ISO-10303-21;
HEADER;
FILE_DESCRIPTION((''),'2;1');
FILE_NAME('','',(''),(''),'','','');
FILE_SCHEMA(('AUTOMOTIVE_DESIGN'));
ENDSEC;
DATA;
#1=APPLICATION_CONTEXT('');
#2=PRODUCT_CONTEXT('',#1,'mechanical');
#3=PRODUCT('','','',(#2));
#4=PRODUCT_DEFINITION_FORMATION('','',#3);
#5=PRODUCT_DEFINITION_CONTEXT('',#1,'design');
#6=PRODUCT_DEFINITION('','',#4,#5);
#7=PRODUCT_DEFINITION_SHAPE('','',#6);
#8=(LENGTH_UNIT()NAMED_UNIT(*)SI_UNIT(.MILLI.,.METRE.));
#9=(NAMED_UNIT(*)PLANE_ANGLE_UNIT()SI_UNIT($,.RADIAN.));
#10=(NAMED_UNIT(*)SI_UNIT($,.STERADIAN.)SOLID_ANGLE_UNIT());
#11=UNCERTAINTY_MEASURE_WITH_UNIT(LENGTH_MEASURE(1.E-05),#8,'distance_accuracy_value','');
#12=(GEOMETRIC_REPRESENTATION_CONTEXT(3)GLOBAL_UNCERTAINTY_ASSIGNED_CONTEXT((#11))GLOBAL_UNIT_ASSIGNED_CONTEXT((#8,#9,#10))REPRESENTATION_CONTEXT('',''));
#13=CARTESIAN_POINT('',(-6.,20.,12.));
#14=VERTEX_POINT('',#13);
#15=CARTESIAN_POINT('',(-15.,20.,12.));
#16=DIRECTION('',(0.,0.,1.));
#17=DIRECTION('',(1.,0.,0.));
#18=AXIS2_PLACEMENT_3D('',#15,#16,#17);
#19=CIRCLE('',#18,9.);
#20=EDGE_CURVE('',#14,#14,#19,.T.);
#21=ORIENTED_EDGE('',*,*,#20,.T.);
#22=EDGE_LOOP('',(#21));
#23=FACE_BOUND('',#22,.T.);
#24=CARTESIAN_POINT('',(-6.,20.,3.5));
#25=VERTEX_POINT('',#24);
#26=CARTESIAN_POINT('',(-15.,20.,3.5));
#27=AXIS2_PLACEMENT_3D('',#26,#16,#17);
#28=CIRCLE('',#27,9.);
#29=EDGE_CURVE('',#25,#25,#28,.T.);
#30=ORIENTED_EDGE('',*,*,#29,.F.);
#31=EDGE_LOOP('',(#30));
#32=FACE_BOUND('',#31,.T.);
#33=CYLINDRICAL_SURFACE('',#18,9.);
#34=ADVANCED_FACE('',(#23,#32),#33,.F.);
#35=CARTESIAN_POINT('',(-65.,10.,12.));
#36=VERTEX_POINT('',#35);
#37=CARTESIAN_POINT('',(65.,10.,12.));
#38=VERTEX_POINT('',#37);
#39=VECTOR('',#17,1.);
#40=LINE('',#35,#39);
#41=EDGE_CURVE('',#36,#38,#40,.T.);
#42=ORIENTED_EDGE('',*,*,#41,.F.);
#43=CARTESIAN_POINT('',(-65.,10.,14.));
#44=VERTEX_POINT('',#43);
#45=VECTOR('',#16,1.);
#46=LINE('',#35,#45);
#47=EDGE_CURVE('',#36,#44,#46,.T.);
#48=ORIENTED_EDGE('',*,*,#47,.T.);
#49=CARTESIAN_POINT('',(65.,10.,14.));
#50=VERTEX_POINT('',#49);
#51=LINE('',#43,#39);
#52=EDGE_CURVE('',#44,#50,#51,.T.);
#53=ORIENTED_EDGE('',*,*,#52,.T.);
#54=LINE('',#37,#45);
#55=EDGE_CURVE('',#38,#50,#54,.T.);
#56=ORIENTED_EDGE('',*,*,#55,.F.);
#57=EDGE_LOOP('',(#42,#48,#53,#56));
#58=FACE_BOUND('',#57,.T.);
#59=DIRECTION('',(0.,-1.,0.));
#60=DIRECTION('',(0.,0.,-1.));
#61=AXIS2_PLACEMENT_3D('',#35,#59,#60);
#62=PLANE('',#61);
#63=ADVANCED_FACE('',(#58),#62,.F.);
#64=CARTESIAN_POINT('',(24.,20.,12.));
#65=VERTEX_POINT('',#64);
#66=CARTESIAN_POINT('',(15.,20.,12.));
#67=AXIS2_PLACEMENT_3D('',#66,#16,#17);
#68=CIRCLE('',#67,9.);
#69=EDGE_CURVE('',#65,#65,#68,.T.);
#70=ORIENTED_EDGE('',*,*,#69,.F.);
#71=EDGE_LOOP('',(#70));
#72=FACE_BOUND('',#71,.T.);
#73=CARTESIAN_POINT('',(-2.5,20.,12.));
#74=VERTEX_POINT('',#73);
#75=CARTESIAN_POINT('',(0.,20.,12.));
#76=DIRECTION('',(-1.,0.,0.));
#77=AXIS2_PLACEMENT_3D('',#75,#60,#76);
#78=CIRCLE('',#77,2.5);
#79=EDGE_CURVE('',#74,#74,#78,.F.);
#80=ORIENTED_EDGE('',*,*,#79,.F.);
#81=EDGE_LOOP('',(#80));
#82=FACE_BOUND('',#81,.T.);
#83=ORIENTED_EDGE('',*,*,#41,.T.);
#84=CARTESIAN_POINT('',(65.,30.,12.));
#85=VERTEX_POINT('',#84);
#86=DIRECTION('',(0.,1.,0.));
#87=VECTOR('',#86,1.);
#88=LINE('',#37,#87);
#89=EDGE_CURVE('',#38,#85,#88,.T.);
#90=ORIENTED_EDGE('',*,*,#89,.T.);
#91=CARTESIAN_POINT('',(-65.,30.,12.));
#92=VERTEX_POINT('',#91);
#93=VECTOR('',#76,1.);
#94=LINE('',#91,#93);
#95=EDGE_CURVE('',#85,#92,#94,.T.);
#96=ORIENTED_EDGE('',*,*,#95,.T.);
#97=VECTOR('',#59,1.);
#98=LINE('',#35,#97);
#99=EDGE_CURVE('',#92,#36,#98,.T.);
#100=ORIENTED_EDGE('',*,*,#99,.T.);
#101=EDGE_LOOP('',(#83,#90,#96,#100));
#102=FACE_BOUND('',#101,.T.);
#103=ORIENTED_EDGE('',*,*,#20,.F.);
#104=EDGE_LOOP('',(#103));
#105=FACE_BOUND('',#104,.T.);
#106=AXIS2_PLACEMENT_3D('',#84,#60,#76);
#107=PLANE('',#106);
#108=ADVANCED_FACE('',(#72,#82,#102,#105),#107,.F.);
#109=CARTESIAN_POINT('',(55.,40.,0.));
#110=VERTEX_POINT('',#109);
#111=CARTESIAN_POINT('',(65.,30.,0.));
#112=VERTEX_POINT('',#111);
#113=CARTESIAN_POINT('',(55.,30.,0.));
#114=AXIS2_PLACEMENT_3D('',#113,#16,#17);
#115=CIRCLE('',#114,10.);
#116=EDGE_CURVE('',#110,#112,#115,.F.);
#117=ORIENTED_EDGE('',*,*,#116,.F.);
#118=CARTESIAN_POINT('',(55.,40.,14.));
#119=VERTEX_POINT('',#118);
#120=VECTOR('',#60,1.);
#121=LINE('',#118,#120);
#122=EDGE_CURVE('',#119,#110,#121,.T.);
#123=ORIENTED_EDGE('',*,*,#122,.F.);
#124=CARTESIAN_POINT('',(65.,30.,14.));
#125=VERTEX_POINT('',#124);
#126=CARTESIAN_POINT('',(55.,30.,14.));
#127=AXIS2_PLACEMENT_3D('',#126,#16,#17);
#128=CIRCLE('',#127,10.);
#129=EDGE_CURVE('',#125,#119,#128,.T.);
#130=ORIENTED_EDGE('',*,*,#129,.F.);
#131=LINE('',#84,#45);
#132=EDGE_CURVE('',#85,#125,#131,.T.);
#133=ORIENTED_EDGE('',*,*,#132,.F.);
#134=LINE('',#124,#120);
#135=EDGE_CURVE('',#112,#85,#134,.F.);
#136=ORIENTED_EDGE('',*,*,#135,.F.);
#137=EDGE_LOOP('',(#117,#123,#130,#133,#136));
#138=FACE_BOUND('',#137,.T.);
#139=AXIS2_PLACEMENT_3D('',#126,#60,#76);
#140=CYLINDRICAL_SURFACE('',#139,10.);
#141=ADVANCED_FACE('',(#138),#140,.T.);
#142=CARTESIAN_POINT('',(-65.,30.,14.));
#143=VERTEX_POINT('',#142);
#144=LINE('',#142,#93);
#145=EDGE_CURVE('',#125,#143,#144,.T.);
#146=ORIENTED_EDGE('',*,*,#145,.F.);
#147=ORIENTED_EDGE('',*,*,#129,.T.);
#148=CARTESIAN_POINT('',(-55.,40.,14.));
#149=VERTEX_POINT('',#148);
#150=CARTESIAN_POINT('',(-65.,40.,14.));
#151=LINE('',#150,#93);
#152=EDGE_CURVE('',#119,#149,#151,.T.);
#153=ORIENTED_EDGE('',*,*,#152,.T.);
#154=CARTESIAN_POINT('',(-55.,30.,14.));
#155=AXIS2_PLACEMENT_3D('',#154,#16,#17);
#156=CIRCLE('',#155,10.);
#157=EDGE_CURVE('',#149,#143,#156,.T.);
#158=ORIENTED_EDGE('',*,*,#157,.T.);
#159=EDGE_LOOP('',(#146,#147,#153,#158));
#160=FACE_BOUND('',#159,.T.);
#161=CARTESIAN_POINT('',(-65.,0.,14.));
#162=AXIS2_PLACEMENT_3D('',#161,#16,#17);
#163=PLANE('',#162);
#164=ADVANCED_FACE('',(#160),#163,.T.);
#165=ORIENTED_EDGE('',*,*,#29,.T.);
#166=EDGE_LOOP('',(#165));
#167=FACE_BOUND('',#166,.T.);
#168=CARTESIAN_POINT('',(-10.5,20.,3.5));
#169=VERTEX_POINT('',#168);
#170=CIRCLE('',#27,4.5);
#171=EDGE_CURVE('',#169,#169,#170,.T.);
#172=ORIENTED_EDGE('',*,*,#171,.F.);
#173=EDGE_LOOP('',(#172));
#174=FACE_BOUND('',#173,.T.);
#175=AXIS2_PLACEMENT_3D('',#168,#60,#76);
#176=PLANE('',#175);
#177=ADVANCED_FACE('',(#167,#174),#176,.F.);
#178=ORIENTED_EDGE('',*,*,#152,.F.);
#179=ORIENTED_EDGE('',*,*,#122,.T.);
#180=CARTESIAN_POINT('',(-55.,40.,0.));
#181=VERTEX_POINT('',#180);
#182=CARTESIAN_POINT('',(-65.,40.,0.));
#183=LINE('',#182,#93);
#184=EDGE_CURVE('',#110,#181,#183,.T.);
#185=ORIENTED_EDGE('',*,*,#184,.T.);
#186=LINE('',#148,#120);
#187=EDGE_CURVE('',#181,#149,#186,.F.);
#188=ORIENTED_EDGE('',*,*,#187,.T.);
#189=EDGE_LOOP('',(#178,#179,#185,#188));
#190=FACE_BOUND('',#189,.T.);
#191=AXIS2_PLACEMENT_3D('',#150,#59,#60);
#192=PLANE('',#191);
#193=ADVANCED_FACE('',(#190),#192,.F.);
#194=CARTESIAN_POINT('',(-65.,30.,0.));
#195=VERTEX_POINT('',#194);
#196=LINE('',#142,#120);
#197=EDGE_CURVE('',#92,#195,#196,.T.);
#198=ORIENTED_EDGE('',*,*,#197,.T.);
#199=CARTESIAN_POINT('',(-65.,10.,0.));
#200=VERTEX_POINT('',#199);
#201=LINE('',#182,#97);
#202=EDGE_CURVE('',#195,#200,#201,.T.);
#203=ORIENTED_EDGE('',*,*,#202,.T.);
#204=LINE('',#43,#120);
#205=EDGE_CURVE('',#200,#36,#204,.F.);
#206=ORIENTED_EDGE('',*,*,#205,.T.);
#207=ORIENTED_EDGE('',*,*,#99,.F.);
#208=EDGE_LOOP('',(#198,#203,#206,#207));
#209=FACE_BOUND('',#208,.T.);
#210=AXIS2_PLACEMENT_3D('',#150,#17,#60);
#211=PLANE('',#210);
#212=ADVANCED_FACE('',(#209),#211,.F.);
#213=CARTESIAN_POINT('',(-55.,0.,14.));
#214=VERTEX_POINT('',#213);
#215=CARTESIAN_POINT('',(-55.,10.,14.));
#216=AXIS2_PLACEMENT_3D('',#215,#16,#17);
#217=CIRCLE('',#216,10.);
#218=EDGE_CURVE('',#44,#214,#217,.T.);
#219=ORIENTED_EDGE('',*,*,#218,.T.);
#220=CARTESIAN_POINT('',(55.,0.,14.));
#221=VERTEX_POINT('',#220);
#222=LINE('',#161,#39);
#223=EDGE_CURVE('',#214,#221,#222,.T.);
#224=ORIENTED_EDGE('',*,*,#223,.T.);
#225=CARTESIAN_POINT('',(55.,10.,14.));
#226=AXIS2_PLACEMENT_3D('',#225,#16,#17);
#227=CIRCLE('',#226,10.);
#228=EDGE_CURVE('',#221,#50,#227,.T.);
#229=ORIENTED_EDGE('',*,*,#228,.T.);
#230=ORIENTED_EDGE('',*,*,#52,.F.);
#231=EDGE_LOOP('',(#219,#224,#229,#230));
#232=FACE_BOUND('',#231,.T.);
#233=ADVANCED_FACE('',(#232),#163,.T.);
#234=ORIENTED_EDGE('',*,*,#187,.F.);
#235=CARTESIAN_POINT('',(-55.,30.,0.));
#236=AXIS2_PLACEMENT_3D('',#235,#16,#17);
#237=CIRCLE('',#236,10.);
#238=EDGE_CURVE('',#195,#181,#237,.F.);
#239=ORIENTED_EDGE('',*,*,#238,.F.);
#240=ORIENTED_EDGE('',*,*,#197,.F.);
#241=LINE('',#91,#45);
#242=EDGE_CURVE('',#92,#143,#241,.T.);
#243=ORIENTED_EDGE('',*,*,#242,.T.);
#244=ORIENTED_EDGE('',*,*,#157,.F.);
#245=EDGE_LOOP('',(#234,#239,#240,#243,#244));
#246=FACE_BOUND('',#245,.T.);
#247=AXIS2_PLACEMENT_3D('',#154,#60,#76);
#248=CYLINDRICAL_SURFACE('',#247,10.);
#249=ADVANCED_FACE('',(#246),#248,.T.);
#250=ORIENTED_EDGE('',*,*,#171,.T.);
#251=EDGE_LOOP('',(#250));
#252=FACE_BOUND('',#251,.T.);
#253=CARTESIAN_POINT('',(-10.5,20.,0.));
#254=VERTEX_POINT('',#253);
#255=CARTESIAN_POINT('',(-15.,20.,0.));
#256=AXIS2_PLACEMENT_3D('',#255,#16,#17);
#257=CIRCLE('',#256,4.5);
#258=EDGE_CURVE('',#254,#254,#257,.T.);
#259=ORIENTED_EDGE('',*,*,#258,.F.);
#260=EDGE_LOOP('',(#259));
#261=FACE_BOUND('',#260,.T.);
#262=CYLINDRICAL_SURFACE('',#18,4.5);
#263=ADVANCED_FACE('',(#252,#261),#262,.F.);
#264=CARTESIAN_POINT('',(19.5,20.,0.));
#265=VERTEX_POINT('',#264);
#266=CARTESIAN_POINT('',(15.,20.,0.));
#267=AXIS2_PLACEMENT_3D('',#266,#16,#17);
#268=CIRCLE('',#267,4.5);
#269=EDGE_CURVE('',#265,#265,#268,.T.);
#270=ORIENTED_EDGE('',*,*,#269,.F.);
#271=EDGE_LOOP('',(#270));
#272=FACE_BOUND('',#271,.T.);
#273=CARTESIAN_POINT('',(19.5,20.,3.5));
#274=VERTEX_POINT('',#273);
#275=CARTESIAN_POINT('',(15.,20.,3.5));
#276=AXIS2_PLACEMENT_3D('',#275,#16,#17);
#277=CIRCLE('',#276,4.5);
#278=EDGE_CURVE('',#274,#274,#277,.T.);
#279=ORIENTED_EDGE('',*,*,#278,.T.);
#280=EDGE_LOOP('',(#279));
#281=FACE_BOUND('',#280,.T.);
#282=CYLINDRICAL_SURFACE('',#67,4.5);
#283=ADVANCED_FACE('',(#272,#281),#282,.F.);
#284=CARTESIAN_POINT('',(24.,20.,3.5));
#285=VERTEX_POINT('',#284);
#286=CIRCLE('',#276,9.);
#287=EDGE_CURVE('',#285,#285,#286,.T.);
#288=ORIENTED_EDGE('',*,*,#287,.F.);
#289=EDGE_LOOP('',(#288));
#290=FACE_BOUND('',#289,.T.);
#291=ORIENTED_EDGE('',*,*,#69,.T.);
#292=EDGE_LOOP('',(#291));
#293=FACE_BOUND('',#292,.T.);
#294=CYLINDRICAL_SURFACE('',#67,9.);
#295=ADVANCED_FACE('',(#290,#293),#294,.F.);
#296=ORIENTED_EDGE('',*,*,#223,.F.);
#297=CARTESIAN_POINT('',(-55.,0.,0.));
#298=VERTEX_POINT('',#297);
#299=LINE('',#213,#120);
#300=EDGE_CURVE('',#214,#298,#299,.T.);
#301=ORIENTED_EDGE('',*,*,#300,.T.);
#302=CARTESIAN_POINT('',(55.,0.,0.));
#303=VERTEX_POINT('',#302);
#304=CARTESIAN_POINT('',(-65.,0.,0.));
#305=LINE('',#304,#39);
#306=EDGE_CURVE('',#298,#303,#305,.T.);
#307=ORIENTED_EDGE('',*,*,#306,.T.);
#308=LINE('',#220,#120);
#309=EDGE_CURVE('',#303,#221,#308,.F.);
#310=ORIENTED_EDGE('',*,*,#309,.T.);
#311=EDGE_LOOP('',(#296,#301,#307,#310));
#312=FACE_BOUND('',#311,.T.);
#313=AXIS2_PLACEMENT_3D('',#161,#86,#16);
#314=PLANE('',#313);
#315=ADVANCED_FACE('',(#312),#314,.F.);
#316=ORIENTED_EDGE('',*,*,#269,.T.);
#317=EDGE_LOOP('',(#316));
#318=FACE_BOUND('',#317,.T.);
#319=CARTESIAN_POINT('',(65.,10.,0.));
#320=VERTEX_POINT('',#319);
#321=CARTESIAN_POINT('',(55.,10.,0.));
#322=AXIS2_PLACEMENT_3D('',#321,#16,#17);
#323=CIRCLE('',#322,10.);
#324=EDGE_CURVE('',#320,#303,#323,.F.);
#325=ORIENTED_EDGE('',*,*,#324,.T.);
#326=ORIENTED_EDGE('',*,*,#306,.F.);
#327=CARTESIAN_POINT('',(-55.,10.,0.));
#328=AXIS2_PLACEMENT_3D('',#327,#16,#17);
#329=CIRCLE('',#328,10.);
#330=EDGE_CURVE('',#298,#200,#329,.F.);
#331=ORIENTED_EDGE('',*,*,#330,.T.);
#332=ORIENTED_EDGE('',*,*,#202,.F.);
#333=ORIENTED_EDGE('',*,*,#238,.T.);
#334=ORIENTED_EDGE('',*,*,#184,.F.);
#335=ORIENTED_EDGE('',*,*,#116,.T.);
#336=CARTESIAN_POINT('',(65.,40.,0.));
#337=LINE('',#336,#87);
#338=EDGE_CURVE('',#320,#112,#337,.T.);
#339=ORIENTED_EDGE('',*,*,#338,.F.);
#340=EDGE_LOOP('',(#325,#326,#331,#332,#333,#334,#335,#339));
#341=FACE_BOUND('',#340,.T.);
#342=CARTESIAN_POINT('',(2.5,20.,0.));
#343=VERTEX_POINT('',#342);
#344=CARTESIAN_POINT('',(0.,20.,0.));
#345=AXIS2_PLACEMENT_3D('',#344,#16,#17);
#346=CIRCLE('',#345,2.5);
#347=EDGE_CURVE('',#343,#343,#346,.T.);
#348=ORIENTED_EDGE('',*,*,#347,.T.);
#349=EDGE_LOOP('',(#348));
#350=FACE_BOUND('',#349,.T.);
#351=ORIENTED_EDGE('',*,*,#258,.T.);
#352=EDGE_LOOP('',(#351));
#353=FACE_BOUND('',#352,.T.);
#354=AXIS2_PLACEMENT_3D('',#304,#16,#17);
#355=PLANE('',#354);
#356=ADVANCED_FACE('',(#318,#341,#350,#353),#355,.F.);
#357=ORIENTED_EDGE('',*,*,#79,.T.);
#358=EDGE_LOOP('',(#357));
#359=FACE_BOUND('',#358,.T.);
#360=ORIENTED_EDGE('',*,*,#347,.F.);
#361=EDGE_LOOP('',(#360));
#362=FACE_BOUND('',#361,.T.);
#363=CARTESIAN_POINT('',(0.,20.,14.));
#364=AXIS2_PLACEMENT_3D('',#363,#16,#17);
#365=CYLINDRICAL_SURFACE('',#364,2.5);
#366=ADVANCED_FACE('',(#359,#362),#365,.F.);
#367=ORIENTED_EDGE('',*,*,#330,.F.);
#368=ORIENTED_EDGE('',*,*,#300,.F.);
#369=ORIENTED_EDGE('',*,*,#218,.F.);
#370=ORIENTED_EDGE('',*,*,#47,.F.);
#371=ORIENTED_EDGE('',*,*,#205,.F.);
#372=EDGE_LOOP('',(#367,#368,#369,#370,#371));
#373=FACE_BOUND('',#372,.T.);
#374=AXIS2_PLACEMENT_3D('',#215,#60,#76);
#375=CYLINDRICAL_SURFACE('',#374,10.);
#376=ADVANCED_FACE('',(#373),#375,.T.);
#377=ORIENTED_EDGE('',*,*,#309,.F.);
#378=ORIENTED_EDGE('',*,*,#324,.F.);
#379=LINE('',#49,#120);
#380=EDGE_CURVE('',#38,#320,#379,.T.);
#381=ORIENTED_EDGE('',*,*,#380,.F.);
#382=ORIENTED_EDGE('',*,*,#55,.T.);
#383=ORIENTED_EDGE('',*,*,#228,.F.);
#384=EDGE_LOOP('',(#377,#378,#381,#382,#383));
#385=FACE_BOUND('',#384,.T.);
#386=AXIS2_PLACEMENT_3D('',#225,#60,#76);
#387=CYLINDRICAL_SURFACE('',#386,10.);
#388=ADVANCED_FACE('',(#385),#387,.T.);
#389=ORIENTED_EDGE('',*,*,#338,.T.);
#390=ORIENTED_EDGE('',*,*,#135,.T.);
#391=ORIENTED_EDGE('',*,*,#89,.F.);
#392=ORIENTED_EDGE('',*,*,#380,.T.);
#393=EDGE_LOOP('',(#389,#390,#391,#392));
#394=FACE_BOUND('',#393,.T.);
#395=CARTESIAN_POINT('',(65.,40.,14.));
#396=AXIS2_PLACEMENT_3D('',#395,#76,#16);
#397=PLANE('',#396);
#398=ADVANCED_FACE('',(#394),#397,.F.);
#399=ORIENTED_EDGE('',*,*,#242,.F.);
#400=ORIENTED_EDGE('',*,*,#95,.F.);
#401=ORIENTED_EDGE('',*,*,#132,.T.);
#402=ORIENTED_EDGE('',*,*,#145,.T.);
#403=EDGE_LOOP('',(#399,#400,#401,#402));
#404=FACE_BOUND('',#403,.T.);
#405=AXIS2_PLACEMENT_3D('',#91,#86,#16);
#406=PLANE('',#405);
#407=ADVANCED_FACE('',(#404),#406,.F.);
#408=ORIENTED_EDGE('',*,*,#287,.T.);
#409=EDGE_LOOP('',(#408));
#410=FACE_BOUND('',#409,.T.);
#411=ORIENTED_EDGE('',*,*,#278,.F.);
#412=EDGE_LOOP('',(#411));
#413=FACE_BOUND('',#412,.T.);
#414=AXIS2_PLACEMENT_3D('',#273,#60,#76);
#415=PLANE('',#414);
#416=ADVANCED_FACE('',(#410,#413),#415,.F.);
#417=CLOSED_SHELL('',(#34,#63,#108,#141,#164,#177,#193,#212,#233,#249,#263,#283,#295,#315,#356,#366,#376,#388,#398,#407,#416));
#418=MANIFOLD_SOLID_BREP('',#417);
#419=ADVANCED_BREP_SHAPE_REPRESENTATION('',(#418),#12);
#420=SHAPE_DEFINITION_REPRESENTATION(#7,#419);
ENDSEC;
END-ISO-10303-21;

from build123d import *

# Parameters (mm, degrees)
SKETCH_1_W                   = 130
SKETCH_1_H                   = 40
EXTRUDE_1_DEPTH              = 14
HOLE_WIZARD_M6_1_D           = 5
SKETCH_8_W                   = 130
SKETCH_8_H                   = 20
CUT_EXTRUDE_1_DEPTH          = 2
HOLE_WIZARD_M8_1_D           = 9
HOLE_WIZARD_M8_1_CBORE_D     = 18
HOLE_WIZARD_M8_1_CBORE_DEPTH = 8.5
FILLET_1_R                   = 10


with BuildPart() as part:
    # 草图1 → 凸台-拉伸1 (new body)
    with BuildSketch(Plane.XY):
        with Locations((0, 20)):
            Rectangle(SKETCH_1_W, SKETCH_1_H)
    extrude(amount=EXTRUDE_1_DEPTH)

    # M6 螺纹孔1 (through all)
    with Locations(Plane.XY.offset(14)):
        with Locations((0, 20)):
            Hole(HOLE_WIZARD_M6_1_D / 2)

    # 草图8 → 切除-拉伸1 (cut)
    with BuildSketch(Plane.XY.offset(14)):
        with Locations((0, 20)):
            Rectangle(SKETCH_8_W, SKETCH_8_H)
    extrude(amount=-CUT_EXTRUDE_1_DEPTH, mode=Mode.SUBTRACT)

    # M8 六角头螺栓的柱形沉头孔1 (through all)
    with Locations(Plane.XY.offset(12)):
        with Locations((-15, 20), (15, 20)):
            CounterBoreHole(HOLE_WIZARD_M8_1_D / 2, HOLE_WIZARD_M8_1_CBORE_D / 2, HOLE_WIZARD_M8_1_CBORE_DEPTH)

    # 圆角1
    fillet_1_edges = [part.edges().sort_by_distance(p)[0] for p in [
        (65, 0, 7),
        (65, 40, 7),
        (-65, 0, 7),
        (-65, 40, 7),
    ]]
    fillet(fillet_1_edges, radius=FILLET_1_R - 0.0001)  # a hair under: the kernel refuses the full size


solid = part.part
